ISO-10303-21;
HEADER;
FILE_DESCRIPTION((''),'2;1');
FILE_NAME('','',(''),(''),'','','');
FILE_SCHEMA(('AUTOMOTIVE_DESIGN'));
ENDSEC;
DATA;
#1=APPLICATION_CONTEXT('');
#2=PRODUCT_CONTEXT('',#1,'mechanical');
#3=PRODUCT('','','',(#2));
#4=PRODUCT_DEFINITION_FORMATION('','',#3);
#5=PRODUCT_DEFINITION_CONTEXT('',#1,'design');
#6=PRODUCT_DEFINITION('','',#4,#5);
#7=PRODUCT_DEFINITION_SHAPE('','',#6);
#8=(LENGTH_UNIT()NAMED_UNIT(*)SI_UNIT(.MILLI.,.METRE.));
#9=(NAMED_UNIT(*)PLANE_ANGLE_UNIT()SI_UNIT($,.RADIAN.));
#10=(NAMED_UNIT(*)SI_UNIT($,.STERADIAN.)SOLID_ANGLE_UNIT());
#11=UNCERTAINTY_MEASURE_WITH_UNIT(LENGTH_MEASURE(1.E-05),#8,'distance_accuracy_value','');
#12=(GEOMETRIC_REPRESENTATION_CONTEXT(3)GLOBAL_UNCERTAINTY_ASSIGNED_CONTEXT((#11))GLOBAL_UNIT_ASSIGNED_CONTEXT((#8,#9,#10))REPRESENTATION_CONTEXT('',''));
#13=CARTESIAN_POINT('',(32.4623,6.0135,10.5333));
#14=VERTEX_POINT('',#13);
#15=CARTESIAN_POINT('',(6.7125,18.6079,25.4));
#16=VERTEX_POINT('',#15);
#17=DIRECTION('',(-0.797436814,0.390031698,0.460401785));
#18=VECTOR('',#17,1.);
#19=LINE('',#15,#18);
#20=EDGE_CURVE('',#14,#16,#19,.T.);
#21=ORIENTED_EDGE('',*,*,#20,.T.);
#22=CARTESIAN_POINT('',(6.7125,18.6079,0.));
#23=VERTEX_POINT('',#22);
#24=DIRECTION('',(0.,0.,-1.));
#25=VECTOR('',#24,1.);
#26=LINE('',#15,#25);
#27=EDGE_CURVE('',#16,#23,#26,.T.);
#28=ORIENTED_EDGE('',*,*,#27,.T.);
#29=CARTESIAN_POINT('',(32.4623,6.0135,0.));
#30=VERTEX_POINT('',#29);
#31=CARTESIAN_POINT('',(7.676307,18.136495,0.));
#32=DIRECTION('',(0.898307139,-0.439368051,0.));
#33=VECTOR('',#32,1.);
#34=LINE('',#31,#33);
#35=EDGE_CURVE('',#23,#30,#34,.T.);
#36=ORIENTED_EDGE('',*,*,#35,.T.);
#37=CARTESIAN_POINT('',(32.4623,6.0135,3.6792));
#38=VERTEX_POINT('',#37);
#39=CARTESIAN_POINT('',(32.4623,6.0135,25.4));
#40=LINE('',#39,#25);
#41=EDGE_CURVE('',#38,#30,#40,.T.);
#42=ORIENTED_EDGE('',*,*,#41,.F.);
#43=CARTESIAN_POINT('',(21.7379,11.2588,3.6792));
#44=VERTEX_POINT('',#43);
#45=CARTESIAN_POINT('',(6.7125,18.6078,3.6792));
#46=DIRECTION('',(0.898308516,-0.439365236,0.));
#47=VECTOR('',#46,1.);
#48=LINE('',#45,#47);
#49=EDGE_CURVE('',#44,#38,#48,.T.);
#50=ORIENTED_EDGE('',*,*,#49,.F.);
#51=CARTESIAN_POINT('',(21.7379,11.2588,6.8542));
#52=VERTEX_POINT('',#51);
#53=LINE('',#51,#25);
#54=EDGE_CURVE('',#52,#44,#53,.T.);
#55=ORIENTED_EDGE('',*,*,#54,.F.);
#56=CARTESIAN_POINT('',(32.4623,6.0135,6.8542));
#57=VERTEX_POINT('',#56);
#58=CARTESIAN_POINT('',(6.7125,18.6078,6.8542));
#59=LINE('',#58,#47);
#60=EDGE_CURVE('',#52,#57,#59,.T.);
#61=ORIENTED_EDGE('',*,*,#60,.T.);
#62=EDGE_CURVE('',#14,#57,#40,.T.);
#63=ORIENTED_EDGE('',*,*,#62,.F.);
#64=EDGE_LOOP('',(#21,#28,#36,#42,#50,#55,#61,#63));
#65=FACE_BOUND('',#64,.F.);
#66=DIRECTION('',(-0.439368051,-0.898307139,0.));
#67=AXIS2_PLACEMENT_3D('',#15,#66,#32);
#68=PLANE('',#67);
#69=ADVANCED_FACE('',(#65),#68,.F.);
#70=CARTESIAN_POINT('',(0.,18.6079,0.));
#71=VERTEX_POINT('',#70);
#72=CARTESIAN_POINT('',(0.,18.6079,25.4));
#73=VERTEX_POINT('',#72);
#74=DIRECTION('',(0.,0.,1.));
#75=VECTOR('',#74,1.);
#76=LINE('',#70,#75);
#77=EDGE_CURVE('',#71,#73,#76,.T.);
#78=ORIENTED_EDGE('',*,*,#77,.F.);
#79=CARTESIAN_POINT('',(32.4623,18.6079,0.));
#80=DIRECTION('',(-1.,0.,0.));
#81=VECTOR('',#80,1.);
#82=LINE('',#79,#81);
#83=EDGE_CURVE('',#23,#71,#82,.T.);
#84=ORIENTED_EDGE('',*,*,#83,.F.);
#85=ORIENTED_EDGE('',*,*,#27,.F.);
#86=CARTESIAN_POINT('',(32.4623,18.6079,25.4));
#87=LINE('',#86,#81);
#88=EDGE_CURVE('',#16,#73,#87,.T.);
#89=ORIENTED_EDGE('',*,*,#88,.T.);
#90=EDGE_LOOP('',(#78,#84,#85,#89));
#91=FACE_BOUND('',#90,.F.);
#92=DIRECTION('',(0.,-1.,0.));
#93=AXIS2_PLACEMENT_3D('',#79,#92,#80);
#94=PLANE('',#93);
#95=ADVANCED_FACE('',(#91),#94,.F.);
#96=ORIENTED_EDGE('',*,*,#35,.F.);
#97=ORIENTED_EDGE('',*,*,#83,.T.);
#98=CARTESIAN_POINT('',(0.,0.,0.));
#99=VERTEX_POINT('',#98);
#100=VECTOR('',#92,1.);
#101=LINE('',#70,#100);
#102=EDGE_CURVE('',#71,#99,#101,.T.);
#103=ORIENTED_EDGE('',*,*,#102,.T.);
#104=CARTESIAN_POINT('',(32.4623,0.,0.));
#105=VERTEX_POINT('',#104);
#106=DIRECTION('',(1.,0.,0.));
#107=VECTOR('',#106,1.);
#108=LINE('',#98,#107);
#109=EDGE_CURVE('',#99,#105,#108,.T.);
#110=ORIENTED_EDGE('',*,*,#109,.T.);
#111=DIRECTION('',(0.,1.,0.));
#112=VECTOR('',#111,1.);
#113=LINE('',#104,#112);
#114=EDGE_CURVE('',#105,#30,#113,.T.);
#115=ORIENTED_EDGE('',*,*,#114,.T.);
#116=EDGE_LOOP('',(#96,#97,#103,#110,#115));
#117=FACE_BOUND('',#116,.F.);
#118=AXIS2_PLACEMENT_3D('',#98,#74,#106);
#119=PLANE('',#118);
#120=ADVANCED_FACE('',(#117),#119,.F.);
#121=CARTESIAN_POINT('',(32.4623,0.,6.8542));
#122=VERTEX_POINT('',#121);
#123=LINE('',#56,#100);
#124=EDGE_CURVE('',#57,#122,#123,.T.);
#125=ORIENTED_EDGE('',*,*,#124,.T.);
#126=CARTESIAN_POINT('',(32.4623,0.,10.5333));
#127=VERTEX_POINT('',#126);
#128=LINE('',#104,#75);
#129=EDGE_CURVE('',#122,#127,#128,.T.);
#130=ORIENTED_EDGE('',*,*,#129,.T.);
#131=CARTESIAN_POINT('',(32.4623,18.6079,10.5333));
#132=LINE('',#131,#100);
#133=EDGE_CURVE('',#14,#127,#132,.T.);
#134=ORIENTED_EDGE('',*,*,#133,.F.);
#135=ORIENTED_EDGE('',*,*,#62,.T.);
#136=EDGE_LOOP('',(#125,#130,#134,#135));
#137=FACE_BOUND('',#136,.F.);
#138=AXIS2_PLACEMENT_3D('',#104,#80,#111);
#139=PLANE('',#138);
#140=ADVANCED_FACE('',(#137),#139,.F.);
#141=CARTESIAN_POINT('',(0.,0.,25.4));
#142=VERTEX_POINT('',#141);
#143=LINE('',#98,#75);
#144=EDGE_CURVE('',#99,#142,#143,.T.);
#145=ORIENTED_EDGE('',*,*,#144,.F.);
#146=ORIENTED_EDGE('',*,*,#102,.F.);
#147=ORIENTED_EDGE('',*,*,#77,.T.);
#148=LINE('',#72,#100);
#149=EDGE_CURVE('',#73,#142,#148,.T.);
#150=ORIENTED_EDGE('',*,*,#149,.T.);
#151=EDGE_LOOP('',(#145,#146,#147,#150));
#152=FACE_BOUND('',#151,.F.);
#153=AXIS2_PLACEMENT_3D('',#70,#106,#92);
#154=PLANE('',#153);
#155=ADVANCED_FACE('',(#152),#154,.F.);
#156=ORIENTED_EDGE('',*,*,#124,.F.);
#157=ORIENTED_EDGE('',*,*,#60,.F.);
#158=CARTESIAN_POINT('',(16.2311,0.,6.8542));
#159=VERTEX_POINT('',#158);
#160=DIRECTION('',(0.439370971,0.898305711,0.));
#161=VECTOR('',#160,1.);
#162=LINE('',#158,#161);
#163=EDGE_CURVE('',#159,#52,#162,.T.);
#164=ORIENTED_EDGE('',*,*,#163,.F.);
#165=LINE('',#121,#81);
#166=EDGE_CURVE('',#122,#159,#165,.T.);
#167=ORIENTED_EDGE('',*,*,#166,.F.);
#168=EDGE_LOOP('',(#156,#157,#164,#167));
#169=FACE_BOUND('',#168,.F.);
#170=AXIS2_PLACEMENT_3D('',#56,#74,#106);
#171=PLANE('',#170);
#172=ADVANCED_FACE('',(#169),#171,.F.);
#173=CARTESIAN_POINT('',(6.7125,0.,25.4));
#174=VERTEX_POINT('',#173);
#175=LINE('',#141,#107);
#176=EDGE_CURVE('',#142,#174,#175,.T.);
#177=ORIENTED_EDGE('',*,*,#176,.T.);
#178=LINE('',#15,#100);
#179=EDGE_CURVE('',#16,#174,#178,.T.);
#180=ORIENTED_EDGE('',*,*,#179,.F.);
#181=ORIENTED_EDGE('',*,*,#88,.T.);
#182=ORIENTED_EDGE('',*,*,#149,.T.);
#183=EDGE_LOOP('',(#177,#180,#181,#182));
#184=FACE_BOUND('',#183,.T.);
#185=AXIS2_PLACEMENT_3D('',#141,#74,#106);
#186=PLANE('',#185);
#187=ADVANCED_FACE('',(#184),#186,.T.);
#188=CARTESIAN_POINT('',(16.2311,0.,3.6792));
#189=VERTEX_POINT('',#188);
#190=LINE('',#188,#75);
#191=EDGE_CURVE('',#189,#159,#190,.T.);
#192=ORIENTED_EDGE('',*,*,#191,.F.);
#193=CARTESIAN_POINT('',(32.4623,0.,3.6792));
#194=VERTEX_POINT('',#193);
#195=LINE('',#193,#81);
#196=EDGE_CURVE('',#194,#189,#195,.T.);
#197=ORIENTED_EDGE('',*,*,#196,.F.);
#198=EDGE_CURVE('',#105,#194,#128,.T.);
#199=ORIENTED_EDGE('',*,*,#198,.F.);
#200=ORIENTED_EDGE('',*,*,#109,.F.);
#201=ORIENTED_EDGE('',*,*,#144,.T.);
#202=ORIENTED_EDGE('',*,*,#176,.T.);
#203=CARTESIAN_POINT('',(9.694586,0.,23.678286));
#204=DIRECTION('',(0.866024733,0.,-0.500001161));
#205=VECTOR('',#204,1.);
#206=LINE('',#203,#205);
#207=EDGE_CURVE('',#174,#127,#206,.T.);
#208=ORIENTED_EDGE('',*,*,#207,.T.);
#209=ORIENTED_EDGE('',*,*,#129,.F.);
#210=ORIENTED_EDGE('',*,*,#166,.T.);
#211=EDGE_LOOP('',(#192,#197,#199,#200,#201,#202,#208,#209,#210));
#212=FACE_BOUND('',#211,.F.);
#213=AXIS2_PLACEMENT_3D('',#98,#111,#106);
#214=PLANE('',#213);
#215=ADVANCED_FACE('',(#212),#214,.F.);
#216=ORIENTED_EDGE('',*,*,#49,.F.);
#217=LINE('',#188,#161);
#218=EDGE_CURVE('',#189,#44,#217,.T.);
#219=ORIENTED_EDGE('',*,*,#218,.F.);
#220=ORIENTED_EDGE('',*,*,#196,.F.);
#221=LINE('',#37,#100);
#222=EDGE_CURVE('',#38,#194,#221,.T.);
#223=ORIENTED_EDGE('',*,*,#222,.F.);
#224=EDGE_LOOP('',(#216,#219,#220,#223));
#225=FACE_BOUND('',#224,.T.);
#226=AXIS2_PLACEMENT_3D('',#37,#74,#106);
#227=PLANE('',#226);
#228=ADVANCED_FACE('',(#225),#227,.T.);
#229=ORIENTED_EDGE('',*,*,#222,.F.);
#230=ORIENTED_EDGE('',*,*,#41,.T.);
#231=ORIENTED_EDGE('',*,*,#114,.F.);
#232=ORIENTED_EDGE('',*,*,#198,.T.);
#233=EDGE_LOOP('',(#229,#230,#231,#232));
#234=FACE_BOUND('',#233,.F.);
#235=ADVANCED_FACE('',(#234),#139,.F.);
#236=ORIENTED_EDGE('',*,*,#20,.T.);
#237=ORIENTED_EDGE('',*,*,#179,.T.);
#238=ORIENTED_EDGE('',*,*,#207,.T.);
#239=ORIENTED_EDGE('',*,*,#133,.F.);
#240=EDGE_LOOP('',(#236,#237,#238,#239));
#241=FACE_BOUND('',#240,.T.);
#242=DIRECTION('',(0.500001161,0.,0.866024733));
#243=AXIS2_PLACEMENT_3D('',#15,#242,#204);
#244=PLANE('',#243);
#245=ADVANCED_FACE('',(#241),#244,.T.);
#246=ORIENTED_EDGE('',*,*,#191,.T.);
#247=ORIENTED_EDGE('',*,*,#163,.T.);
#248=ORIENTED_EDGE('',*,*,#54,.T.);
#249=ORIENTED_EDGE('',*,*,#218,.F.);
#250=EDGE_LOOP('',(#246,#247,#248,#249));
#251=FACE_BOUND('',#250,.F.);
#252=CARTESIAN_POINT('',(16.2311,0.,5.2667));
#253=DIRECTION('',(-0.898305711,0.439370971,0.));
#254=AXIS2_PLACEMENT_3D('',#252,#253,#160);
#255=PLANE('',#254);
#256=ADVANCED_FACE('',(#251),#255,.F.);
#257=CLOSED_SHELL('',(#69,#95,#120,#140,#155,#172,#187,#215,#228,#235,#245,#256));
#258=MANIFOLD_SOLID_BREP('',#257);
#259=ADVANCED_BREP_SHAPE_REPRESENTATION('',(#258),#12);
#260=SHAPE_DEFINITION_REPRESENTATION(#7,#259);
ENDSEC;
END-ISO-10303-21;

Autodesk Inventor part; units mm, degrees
ref_plane "YZ Plane" through (0, 0, 0) normal (1, 0, 0) x (0, 1, 0)
ref_plane "XZ Plane" through (0, 0, 0) normal (0, 1, 0) x (-1, 0, 0)
ref_plane "XY Plane" through (0, 0, 0) normal (0, 0, 1) x (1, 0, 0)
sketch "Sketch1" plane through (0, 0, 0) normal (0, 0, 1) x (1, 0, 0)
  line L0 (0, 0) -> (32.4623, 0)
  line L1 (32.4623, 0) -> (32.4623, 18.6079)
  line L2 (32.4623, 18.6079) -> (0, 18.6079)
  line L3 (0, 18.6079) -> (0, 0)
extrude "Extrusion1" add sketch "Sketch1" along normal blind 25.4
sketch "Sketch2" plane through (0, 0, 25.4) normal (0, 0, 1) x (1, 0, 0)
  line L0 (32.4623, 0) -> (32.4623, 18.6079) projected
  line L1 (32.4623, 18.6079) -> (0, 18.6079) projected
  line L2 (6.7125, 18.6079) -> (32.4623, 6.0135)
extrude "Extrusion2" cut sketch "Sketch2" against normal through all
sketch "Sketch4" plane through (0, 18.6079, 25.4) normal (0, 1, 0) x (1, 0, 0)
  line L0 (0, 25.4) -> (0, 0) projected
  line L1 (6.7125, 25.4) -> (32.4623, 25.4) projected
  line L2 (6.7125, 0) -> (6.7125, 25.4) projected
  line L3 (32.4623, 0) -> (6.7125, 0) projected
  line L4 (32.4623, 25.4) -> (32.4623, 0) projected
  line L5 (6.7125, 0) -> (32.4623, 14.8667)
  dimension "d6" = 30
extrude "Extrusion4" cut sketch "Sketch4" against normal through all contours L5 L4 L3
ref_plane "Work Plane1" through (32.4623, 6.0135, 5.2667) normal (0, 0, 1) x (1, 0, 0)
sketch "Sketch5" plane through (32.4623, 6.0135, 5.2667) normal (0, 0, 1) x (1, 0, 0)
  line L0 (-32.4623, -6.0135) -> (-32.4623, 12.5943) projected
  line L1 (-32.4623, 12.5943) -> (-25.7498, 12.5943) projected
  line L2 (-25.7498, 12.5943) -> (0, 0) projected
  line L3 (0, 0) -> (0, -6.0135) projected
  line L4 (0, -6.0135) -> (-32.4623, -6.0135) projected
  line L5 (-16.2312, -6.0135) -> (-10.7244, 5.2453)
extrude "Extrusion5" cut sketch "Sketch5" along normal mid plane 3.175 contours L5 L2 L3 L4
properties part number "Importing AutoCAD Geometry"
